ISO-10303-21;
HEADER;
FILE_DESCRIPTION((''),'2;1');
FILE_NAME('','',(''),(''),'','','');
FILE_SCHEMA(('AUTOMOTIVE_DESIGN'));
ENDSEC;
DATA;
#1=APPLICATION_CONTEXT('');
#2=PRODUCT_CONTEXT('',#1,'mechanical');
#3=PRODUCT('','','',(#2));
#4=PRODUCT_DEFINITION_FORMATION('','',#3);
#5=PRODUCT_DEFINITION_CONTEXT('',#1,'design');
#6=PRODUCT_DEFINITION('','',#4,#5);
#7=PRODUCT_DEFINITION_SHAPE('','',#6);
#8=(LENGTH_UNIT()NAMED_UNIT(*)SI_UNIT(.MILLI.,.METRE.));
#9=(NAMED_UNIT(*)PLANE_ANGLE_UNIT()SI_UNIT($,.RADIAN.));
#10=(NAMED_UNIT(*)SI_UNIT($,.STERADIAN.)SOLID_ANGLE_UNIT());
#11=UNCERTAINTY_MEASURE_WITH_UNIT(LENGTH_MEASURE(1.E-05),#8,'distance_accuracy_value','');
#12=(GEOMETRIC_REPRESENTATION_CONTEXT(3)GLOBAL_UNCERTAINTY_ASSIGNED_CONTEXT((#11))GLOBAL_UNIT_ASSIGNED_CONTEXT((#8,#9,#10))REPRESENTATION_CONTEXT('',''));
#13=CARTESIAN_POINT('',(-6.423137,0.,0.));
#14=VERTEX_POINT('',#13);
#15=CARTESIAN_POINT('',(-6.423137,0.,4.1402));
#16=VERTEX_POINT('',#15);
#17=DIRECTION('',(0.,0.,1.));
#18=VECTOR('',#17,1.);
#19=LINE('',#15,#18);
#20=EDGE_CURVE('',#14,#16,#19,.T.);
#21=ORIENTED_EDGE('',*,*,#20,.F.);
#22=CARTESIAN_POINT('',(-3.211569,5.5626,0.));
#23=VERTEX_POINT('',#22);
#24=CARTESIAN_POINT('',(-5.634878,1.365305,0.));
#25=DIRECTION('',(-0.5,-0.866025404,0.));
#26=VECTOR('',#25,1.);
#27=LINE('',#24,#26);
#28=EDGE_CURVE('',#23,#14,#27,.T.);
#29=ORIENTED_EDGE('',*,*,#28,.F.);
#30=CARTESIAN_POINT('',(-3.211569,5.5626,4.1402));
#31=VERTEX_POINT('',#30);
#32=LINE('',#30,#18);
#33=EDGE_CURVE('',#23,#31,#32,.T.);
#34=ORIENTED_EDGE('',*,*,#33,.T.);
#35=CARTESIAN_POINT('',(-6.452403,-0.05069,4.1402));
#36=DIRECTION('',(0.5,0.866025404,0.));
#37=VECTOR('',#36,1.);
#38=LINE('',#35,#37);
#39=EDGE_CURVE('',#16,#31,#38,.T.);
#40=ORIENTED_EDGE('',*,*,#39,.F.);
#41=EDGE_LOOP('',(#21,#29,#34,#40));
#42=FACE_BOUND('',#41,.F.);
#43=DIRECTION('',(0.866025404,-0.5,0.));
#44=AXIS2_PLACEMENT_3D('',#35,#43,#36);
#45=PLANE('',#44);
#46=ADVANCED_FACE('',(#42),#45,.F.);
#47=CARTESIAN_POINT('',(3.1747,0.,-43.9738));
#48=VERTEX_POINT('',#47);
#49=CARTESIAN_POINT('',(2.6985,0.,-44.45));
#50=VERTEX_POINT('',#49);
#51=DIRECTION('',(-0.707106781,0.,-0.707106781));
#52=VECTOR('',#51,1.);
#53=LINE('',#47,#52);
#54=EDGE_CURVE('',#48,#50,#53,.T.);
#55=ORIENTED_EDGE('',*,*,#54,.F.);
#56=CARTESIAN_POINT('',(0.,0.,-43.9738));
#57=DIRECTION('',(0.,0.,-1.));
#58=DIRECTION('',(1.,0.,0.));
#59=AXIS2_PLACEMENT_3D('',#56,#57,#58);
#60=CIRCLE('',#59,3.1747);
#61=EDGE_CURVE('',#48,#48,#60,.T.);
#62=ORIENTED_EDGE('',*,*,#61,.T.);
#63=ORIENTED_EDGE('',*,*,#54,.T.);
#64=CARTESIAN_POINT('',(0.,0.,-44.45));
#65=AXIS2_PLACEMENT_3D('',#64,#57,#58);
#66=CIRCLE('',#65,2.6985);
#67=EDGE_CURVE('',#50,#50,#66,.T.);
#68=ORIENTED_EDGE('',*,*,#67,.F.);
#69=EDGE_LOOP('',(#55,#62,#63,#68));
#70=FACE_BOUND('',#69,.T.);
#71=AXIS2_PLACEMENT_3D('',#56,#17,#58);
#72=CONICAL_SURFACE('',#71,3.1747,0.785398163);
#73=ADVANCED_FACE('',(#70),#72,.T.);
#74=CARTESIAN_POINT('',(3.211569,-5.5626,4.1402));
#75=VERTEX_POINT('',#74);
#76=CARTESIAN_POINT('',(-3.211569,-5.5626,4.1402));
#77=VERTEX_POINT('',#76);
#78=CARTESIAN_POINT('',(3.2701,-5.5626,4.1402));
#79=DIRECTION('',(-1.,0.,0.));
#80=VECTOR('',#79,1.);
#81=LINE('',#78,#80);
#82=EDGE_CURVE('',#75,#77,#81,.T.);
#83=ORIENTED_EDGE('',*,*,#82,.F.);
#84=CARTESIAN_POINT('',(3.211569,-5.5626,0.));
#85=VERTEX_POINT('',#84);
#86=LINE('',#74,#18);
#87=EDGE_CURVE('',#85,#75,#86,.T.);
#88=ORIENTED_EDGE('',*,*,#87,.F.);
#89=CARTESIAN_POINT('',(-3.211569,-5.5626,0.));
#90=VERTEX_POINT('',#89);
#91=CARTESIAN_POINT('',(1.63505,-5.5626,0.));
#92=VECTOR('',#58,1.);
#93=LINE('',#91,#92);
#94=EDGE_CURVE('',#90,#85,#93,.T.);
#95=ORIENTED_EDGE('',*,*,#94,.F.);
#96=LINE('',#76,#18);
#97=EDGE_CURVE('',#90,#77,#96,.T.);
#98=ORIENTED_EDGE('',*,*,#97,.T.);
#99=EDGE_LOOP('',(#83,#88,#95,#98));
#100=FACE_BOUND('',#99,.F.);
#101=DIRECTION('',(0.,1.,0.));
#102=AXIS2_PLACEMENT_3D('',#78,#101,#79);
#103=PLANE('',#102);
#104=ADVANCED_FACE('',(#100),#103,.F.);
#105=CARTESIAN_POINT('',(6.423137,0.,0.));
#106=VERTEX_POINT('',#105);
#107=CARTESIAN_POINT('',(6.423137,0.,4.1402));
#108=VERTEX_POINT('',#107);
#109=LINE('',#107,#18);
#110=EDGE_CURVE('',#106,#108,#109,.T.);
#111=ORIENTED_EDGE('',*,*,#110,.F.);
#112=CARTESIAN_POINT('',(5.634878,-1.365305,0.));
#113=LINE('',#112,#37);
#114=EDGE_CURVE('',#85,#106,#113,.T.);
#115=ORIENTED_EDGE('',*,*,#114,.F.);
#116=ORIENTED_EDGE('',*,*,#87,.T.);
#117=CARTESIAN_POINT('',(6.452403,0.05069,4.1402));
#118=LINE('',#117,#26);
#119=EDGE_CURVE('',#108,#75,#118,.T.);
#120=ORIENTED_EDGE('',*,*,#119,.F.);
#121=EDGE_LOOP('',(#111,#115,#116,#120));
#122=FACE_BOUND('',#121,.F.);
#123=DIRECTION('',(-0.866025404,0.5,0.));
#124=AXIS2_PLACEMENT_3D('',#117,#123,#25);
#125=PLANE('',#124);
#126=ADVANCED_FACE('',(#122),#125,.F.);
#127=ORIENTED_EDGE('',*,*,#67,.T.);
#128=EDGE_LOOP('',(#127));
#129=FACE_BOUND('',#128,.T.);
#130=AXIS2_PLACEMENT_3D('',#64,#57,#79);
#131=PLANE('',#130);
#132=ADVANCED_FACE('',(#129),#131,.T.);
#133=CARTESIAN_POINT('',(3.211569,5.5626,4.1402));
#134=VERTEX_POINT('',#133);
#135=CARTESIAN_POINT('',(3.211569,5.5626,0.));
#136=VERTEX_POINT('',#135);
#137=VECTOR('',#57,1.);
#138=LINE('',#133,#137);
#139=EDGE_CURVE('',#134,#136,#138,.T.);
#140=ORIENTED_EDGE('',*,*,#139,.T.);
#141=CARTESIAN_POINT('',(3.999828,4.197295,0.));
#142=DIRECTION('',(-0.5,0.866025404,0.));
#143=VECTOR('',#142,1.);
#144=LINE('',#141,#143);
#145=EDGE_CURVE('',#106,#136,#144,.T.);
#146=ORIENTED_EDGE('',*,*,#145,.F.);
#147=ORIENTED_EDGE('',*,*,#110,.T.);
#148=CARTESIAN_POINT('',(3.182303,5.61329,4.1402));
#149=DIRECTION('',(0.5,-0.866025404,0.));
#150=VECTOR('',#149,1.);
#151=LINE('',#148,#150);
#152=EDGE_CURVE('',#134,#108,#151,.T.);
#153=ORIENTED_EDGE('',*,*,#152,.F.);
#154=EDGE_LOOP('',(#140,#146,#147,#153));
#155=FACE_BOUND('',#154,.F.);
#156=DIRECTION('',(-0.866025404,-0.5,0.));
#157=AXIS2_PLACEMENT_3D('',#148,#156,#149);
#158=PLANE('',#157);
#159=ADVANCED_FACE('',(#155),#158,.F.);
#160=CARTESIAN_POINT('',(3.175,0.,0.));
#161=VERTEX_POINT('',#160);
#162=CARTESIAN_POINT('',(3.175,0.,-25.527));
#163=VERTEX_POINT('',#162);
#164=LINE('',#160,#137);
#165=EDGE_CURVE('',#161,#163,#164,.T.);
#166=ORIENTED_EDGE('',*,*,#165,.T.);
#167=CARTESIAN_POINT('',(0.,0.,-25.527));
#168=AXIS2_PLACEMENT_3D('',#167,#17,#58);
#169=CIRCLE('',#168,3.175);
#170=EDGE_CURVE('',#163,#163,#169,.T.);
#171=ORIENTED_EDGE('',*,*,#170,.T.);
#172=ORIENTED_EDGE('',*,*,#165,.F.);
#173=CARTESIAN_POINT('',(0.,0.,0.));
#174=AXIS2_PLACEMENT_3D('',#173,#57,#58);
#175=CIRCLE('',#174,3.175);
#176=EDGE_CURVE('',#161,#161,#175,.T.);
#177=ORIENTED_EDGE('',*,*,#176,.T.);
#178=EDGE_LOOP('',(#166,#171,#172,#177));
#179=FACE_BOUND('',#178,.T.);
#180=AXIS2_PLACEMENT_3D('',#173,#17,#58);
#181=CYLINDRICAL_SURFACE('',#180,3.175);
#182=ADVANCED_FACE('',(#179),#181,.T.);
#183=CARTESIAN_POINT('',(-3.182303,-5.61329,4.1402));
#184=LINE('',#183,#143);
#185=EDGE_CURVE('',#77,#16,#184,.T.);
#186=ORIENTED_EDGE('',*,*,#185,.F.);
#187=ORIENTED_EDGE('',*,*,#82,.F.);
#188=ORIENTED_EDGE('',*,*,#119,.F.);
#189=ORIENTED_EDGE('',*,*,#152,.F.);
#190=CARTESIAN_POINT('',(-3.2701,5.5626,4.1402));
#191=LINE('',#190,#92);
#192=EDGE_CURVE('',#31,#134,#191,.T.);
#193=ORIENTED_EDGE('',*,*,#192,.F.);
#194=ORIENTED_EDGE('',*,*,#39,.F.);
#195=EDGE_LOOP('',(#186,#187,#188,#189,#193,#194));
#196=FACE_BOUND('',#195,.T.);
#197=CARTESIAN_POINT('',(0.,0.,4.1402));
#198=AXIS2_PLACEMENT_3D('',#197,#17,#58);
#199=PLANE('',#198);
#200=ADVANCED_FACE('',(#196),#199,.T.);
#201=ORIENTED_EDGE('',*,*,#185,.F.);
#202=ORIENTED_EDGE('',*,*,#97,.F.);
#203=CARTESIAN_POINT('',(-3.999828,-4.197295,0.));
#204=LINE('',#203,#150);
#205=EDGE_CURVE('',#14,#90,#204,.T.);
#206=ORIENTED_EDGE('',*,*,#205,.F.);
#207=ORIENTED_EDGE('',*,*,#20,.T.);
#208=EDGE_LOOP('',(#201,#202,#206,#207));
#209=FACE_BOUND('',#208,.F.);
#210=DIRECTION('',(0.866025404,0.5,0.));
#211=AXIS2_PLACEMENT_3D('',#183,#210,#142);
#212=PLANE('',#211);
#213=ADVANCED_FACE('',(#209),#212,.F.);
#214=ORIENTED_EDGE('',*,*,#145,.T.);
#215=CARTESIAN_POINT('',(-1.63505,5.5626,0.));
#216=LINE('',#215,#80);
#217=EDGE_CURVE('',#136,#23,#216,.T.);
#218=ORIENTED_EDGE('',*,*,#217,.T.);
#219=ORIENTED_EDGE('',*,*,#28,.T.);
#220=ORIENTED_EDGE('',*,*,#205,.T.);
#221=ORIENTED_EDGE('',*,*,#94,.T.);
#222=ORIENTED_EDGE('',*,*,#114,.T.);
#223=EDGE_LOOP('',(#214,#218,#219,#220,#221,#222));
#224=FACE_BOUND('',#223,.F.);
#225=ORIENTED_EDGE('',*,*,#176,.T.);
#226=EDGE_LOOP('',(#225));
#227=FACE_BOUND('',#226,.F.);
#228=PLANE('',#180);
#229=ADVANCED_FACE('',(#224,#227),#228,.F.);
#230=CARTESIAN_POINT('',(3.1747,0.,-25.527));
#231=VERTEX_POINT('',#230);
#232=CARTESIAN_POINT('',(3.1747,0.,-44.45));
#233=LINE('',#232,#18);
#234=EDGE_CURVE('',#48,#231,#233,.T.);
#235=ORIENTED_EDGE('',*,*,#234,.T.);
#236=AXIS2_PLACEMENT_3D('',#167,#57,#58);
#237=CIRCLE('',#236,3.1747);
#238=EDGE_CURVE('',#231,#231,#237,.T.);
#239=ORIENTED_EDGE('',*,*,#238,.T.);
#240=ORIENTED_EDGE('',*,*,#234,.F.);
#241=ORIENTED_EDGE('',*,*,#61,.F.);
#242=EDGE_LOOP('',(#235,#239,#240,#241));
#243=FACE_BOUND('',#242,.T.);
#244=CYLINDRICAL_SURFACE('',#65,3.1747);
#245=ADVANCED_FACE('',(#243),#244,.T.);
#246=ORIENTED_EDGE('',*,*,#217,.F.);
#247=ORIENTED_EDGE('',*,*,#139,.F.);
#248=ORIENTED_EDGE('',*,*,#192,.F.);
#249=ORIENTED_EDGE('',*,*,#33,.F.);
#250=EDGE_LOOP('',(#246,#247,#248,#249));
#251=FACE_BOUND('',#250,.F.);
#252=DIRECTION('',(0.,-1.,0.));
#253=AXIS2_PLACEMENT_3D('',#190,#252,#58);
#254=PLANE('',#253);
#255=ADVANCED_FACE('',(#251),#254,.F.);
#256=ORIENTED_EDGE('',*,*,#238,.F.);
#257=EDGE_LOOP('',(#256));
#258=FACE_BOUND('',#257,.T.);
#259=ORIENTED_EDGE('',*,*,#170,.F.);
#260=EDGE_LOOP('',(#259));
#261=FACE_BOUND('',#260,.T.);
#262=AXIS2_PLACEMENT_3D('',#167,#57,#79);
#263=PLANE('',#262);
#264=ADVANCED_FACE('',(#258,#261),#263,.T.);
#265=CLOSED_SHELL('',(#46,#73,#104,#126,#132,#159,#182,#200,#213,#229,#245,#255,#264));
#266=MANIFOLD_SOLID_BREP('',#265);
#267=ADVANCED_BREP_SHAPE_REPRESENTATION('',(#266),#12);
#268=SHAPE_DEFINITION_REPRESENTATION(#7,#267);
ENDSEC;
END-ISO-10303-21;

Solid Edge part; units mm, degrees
sketch "Sketch1" plane through (0, 0, 0) normal (0, 0, 1) x (1, 0, 0)
  circle A0 centre (0, 0) radius 6.4526
  dimension "D1" = 12.9052
extrude "Protrusion1" add sketch "Sketch1" along normal blind 4.1402
sketch "Sketch2" plane through (0, 0, 0) normal (0, 0, -1) x (1, 0, 0)
  circle A0 centre (0, 0) radius 3.175
extrude "Protrusion2" add sketch "Sketch2" along normal blind 44.45
sketch "Sketch3" plane through (0, 0, -44.45) normal (0, 0, -1) x (1, 0, 0)
  circle A0 centre (0, 0) radius 3.1747
extrude "Cutout1" cut sketch "Sketch3" against normal blind 18.923 flip side to cut
chamfer "Chamfer_1" distance 0.4762 angle 45 1 edges at (-3.1747, 0, -44.45)
sketch "Sketch4" plane through (0, 0, 4.1402) normal (0, 0, 1) x (1, 0, 0)
  line L0 (-3.2701, 5.5626) -> (3.2701, 5.5626)
  dimension "D1" = 11.1252
extrude "Cutout2" cut sketch "Sketch4" against normal up to next material side at (0, 5.6126, 4.1402)
pattern_circular "Pattern1" count 6 over 360 about axis through (0, 0, 4.1402) along (0, 0, 1) of "Cutout2"
properties part number "139512"
